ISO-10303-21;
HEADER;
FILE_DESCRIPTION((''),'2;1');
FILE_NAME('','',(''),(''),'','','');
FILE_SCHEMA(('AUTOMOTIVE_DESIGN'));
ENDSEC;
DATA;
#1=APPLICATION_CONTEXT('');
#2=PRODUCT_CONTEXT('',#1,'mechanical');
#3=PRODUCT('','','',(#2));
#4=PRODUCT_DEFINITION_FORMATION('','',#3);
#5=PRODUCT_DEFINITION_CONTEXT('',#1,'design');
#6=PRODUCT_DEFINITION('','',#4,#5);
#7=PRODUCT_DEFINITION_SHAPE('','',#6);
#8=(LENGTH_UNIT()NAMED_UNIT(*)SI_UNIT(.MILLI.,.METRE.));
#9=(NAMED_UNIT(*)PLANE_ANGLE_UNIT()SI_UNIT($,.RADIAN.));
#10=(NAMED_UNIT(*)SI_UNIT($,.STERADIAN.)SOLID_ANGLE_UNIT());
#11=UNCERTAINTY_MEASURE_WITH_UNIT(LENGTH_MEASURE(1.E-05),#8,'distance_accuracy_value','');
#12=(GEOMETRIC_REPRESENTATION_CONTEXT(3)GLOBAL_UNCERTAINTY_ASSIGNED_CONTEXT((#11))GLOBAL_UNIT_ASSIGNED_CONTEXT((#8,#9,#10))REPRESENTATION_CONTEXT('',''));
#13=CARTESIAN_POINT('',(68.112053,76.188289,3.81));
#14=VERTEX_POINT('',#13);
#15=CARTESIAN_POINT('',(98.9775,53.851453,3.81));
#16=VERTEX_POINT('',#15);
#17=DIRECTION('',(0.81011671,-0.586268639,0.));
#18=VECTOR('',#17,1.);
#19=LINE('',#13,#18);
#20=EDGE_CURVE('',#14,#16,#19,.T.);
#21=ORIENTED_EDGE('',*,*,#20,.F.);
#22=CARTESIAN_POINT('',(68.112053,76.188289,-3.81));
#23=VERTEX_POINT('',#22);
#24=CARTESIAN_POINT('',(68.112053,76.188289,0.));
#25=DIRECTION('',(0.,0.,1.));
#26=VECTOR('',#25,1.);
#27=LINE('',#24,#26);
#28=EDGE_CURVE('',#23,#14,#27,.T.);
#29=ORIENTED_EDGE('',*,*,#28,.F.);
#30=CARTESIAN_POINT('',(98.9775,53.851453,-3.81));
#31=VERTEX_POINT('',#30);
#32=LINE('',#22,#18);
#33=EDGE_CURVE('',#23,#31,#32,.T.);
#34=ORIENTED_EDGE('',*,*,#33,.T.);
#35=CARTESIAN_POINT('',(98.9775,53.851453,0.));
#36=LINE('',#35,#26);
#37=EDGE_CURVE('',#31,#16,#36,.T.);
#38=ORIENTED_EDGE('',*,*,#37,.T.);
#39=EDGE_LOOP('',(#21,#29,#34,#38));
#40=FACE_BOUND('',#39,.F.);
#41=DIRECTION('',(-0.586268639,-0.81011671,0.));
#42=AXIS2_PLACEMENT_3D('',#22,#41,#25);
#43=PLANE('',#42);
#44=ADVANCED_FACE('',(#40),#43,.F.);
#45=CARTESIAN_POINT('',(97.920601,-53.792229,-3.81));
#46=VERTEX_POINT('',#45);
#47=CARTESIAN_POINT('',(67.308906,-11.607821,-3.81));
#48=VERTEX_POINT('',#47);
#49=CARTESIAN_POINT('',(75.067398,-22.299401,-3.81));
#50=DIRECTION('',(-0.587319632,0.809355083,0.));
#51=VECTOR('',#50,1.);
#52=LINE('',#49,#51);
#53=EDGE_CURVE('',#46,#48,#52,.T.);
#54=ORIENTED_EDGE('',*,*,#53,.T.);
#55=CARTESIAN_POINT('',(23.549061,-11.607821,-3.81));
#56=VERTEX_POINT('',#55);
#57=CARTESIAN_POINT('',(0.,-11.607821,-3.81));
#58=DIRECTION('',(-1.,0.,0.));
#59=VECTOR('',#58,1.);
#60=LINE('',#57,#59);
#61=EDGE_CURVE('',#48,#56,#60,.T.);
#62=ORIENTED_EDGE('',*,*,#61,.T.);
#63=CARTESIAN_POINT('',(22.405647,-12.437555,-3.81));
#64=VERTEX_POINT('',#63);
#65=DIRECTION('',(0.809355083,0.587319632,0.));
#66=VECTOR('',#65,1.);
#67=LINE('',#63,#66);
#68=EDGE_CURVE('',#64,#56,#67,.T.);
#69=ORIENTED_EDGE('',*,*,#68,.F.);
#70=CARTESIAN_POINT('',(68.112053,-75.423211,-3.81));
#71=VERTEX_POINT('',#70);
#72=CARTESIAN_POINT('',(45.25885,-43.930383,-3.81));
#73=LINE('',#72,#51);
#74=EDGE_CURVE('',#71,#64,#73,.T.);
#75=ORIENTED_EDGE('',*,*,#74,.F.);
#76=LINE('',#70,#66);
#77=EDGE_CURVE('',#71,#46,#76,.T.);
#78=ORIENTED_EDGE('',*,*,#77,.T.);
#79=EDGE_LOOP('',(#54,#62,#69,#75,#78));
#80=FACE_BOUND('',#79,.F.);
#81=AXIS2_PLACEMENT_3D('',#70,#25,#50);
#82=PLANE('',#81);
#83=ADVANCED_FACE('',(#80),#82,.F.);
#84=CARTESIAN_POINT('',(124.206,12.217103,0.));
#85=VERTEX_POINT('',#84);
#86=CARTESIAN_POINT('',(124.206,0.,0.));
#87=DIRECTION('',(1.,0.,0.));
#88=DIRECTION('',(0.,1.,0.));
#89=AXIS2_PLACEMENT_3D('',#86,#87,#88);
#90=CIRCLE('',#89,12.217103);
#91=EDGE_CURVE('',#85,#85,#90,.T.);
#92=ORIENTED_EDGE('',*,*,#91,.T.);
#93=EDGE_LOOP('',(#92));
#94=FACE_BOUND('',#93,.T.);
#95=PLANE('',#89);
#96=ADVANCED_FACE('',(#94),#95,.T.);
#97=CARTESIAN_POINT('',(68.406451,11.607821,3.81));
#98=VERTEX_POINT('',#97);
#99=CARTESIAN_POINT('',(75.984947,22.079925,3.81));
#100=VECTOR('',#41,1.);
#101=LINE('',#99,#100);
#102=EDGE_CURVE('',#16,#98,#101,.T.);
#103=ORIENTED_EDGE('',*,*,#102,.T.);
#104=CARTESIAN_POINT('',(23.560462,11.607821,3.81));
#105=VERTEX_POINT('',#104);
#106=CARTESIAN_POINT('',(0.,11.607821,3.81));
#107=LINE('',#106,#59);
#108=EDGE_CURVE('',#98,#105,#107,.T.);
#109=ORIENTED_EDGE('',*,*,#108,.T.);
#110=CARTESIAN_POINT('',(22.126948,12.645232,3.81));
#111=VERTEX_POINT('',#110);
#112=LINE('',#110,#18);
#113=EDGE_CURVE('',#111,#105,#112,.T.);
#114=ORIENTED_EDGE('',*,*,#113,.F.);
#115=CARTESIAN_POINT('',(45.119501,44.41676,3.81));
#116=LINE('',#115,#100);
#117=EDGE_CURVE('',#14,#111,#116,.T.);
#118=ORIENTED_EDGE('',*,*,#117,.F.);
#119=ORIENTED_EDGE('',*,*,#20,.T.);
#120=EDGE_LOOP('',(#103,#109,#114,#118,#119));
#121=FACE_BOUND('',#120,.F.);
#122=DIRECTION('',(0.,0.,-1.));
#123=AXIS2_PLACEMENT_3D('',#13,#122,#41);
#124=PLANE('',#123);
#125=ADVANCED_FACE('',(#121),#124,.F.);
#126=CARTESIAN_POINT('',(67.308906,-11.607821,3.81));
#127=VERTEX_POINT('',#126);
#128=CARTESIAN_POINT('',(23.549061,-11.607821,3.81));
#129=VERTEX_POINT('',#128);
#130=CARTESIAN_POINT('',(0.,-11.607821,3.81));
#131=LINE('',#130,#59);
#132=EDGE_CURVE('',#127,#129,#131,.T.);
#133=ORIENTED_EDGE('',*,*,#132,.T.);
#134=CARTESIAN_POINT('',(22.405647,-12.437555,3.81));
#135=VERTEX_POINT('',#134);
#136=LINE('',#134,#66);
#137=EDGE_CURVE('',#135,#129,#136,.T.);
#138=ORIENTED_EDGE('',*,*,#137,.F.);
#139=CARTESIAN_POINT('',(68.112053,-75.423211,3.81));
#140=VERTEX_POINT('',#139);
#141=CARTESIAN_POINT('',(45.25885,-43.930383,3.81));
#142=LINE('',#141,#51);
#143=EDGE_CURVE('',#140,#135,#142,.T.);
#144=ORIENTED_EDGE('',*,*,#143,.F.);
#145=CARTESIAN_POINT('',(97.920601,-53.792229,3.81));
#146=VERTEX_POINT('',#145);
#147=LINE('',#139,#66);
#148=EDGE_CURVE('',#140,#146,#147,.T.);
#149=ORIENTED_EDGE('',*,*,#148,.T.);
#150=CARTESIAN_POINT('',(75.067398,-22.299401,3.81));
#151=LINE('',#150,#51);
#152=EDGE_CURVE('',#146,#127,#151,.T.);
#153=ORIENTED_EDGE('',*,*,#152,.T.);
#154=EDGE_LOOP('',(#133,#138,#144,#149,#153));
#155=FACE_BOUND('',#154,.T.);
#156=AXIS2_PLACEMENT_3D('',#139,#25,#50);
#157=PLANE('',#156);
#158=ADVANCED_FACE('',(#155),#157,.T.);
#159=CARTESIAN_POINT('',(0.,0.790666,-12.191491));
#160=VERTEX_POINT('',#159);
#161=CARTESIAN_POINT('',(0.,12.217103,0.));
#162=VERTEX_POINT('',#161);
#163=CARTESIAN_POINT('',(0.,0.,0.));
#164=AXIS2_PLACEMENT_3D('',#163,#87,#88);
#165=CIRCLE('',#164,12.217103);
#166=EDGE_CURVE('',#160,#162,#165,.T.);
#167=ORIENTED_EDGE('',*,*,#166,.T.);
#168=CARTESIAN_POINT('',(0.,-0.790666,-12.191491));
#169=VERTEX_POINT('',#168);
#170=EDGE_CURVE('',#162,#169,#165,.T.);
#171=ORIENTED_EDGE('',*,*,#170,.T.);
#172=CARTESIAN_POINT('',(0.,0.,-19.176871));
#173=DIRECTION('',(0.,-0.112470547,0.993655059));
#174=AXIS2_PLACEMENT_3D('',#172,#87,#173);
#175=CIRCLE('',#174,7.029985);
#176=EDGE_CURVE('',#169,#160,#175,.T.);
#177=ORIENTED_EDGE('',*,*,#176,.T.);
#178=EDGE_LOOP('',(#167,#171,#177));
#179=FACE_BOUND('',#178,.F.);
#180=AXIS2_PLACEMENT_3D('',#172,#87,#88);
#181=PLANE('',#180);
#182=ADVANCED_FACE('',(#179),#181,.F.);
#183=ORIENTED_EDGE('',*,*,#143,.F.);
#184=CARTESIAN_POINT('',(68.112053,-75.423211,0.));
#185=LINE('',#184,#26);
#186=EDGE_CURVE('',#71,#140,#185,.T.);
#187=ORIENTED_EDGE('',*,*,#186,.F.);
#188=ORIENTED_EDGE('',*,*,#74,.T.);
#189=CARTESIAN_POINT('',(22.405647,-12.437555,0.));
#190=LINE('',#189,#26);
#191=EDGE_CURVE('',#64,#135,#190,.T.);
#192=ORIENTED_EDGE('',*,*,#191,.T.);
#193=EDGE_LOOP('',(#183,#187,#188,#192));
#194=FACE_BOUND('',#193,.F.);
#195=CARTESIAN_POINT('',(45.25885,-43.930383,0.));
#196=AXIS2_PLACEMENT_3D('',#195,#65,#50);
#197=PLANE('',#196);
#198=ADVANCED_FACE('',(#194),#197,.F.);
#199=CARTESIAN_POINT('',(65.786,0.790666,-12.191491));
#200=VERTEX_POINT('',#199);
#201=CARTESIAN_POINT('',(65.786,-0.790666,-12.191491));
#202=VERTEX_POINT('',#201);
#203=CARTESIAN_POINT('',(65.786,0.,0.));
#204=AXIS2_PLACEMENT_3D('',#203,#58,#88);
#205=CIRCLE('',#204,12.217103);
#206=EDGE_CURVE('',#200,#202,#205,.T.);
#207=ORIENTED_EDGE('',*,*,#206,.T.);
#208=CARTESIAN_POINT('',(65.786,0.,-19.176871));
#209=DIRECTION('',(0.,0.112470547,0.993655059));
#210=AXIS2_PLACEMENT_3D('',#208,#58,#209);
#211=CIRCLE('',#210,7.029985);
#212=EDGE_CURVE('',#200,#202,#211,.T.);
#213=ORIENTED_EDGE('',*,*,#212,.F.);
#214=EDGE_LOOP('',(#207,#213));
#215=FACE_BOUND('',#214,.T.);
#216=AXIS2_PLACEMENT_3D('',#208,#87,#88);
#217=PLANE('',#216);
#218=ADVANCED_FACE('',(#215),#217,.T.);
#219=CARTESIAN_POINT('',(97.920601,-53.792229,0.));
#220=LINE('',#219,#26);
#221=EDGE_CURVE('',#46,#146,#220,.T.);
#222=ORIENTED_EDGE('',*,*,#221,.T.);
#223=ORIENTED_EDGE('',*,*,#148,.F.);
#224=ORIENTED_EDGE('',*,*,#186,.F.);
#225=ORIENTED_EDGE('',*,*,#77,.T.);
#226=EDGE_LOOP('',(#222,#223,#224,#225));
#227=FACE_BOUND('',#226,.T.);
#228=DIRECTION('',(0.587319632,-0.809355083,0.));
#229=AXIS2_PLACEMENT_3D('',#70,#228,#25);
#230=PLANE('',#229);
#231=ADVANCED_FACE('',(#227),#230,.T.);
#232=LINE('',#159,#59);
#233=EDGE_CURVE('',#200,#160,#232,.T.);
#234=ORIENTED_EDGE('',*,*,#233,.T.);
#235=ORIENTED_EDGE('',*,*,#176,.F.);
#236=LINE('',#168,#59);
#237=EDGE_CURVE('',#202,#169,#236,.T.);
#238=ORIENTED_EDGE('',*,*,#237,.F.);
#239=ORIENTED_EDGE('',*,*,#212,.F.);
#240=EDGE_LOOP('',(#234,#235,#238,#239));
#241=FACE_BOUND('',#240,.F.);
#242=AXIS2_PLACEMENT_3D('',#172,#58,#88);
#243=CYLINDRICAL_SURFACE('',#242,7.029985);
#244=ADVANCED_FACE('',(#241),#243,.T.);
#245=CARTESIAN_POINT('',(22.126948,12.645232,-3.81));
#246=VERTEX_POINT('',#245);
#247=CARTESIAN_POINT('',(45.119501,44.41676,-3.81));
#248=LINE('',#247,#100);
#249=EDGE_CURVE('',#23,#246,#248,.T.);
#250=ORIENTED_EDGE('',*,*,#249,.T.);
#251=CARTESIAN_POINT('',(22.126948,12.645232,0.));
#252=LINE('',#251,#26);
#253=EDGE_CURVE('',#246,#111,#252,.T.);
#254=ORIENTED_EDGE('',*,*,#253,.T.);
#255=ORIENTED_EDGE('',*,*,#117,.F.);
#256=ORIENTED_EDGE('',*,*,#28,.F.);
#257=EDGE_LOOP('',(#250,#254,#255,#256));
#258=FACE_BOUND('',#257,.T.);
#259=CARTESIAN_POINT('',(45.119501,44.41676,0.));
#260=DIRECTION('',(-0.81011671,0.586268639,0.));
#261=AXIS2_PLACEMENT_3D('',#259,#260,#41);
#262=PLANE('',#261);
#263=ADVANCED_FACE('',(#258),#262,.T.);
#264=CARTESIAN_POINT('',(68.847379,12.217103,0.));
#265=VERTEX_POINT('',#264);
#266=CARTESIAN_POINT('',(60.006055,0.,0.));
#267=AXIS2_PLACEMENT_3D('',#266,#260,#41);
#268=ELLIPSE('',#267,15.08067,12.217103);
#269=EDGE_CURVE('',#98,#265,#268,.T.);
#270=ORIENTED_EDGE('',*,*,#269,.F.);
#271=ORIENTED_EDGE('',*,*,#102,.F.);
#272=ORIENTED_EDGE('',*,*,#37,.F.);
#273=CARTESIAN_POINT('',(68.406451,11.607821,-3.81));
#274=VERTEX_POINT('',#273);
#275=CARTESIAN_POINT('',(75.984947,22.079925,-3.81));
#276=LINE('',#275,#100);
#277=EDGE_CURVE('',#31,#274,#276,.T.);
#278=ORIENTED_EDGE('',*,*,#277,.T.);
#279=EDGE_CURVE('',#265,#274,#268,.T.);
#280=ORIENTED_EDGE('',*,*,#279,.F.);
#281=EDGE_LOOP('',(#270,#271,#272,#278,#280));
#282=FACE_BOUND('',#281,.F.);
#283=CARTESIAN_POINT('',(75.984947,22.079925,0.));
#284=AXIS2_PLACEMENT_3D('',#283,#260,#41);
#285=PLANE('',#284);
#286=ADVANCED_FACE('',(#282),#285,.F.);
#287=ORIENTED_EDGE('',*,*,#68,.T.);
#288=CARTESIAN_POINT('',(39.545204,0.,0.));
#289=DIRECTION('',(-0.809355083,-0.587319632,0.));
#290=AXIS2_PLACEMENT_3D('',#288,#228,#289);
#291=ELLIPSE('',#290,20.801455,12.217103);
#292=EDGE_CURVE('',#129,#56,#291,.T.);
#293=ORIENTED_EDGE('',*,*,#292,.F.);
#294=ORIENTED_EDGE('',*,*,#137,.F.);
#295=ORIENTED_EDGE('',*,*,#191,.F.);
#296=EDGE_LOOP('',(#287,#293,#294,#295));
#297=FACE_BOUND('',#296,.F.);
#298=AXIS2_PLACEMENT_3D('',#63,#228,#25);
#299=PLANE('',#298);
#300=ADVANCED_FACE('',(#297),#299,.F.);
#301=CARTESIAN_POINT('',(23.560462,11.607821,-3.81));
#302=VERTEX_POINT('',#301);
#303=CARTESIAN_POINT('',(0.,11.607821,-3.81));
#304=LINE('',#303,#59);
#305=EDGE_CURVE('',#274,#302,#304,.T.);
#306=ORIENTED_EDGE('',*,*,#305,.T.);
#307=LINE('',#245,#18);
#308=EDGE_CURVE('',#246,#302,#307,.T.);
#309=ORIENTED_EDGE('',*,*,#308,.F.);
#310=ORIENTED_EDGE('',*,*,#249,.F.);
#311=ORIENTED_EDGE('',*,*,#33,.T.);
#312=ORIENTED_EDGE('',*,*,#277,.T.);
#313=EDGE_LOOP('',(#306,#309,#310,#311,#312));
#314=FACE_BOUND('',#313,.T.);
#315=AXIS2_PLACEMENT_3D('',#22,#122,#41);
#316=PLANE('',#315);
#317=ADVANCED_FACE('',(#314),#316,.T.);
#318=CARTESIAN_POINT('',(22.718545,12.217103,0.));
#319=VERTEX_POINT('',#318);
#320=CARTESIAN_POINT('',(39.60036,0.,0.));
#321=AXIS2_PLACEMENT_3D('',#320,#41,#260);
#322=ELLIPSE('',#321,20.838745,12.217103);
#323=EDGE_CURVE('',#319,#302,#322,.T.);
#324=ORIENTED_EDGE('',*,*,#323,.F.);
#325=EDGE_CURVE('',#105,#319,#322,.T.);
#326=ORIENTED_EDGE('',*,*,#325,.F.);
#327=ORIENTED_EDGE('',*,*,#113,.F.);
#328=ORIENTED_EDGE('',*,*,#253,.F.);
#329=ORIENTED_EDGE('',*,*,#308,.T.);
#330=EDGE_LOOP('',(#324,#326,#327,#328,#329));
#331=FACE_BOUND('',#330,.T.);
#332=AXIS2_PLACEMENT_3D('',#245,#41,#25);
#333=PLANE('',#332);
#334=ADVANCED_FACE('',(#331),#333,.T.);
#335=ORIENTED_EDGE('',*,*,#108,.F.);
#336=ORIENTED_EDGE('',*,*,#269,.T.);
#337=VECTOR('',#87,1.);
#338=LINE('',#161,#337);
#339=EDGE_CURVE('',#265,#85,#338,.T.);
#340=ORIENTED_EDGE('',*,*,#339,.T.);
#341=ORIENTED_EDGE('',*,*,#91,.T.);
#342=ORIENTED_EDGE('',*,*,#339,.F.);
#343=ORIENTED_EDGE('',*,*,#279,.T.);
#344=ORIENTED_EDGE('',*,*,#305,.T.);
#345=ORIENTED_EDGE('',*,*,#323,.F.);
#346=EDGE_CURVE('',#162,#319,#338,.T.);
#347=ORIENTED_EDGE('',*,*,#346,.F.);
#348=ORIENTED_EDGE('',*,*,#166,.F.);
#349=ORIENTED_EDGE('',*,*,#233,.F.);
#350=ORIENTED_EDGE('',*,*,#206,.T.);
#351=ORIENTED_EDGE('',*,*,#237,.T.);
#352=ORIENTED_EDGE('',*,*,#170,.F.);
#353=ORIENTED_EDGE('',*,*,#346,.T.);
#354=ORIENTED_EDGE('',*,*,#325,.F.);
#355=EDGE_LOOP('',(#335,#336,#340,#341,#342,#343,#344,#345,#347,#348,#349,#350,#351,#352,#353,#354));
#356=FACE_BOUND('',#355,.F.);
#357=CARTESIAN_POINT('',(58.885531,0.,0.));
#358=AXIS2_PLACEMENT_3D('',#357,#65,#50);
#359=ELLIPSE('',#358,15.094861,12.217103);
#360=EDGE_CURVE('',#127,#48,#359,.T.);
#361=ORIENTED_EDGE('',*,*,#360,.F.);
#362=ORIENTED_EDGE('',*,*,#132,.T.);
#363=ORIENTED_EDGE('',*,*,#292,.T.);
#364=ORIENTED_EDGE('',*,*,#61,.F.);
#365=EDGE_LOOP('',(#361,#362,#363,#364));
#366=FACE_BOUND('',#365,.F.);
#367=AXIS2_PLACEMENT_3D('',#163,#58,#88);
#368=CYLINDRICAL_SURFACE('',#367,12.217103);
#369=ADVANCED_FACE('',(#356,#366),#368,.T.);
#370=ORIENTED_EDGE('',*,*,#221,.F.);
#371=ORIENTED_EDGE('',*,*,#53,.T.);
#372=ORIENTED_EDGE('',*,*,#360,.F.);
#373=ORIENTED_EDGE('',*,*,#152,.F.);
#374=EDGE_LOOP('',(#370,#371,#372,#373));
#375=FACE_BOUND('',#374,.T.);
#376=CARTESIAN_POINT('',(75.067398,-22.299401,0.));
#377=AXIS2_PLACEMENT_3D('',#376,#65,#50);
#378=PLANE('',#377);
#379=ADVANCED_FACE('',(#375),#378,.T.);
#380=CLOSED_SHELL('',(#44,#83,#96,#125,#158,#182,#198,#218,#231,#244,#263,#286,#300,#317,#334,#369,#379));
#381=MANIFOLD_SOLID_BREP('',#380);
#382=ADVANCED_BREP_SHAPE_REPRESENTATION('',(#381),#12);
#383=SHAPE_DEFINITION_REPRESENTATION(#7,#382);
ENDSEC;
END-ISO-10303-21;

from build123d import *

# Parameters (mm, degrees)
F0_R      = 12.2171028197
F1_DEPTH  = 124.206
F14_R     = 7.0299846098
F15_DEPTH = 65.786
F10_E8_W  = 77.8220303902
F10_E8_H  = 7.62
F16_DEPTH = 36.83
F11_E6_W  = 78.43691694
F11_E6_H  = 7.62
F17_DEPTH = 38.1


# Not quite as in the source:
# - the program builds the solid bodies; features that only make, move or delete a surface that nothing else refers to are left out


with BuildPart() as f1:
    # F0 (on Right) → F1 (new body)
    with BuildSketch(Plane.YZ):
        Circle(F0_R)
    extrude(amount=F1_DEPTH)

    # F14 (on Right) → F15 (join)
    with BuildSketch(Plane.YZ):
        with Locations((0, -19.1768705845)):
            Circle(F14_R)
    extrude(amount=F15_DEPTH)

    # F10_E8 (on explicit) → F16 (join)
    with BuildSketch(Plane(origin=(68.1120529771, -75.4232108593, -3.81), x_dir=(-0.5873196318, 0.8093550828, 0), z_dir=(0.8093550828, 0.5873196318, 0))):
        with Locations((38.9110151951, 3.81)):
            Rectangle(F10_E8_W, F10_E8_H)
    extrude(amount=F16_DEPTH)

    # F11_E6 (on explicit) → F17 (join)
    with BuildSketch(Plane(origin=(68.1120529771, 76.1882886291, -3.81), x_dir=(-0.5862686387, -0.8101167097, 0), z_dir=(-0.8101167097, 0.5862686387, 0))):
        with Locations((39.21845847, 3.81)):
            Rectangle(F11_E6_W, F11_E6_H)
    extrude(amount=-F17_DEPTH)


solid = f1.part
